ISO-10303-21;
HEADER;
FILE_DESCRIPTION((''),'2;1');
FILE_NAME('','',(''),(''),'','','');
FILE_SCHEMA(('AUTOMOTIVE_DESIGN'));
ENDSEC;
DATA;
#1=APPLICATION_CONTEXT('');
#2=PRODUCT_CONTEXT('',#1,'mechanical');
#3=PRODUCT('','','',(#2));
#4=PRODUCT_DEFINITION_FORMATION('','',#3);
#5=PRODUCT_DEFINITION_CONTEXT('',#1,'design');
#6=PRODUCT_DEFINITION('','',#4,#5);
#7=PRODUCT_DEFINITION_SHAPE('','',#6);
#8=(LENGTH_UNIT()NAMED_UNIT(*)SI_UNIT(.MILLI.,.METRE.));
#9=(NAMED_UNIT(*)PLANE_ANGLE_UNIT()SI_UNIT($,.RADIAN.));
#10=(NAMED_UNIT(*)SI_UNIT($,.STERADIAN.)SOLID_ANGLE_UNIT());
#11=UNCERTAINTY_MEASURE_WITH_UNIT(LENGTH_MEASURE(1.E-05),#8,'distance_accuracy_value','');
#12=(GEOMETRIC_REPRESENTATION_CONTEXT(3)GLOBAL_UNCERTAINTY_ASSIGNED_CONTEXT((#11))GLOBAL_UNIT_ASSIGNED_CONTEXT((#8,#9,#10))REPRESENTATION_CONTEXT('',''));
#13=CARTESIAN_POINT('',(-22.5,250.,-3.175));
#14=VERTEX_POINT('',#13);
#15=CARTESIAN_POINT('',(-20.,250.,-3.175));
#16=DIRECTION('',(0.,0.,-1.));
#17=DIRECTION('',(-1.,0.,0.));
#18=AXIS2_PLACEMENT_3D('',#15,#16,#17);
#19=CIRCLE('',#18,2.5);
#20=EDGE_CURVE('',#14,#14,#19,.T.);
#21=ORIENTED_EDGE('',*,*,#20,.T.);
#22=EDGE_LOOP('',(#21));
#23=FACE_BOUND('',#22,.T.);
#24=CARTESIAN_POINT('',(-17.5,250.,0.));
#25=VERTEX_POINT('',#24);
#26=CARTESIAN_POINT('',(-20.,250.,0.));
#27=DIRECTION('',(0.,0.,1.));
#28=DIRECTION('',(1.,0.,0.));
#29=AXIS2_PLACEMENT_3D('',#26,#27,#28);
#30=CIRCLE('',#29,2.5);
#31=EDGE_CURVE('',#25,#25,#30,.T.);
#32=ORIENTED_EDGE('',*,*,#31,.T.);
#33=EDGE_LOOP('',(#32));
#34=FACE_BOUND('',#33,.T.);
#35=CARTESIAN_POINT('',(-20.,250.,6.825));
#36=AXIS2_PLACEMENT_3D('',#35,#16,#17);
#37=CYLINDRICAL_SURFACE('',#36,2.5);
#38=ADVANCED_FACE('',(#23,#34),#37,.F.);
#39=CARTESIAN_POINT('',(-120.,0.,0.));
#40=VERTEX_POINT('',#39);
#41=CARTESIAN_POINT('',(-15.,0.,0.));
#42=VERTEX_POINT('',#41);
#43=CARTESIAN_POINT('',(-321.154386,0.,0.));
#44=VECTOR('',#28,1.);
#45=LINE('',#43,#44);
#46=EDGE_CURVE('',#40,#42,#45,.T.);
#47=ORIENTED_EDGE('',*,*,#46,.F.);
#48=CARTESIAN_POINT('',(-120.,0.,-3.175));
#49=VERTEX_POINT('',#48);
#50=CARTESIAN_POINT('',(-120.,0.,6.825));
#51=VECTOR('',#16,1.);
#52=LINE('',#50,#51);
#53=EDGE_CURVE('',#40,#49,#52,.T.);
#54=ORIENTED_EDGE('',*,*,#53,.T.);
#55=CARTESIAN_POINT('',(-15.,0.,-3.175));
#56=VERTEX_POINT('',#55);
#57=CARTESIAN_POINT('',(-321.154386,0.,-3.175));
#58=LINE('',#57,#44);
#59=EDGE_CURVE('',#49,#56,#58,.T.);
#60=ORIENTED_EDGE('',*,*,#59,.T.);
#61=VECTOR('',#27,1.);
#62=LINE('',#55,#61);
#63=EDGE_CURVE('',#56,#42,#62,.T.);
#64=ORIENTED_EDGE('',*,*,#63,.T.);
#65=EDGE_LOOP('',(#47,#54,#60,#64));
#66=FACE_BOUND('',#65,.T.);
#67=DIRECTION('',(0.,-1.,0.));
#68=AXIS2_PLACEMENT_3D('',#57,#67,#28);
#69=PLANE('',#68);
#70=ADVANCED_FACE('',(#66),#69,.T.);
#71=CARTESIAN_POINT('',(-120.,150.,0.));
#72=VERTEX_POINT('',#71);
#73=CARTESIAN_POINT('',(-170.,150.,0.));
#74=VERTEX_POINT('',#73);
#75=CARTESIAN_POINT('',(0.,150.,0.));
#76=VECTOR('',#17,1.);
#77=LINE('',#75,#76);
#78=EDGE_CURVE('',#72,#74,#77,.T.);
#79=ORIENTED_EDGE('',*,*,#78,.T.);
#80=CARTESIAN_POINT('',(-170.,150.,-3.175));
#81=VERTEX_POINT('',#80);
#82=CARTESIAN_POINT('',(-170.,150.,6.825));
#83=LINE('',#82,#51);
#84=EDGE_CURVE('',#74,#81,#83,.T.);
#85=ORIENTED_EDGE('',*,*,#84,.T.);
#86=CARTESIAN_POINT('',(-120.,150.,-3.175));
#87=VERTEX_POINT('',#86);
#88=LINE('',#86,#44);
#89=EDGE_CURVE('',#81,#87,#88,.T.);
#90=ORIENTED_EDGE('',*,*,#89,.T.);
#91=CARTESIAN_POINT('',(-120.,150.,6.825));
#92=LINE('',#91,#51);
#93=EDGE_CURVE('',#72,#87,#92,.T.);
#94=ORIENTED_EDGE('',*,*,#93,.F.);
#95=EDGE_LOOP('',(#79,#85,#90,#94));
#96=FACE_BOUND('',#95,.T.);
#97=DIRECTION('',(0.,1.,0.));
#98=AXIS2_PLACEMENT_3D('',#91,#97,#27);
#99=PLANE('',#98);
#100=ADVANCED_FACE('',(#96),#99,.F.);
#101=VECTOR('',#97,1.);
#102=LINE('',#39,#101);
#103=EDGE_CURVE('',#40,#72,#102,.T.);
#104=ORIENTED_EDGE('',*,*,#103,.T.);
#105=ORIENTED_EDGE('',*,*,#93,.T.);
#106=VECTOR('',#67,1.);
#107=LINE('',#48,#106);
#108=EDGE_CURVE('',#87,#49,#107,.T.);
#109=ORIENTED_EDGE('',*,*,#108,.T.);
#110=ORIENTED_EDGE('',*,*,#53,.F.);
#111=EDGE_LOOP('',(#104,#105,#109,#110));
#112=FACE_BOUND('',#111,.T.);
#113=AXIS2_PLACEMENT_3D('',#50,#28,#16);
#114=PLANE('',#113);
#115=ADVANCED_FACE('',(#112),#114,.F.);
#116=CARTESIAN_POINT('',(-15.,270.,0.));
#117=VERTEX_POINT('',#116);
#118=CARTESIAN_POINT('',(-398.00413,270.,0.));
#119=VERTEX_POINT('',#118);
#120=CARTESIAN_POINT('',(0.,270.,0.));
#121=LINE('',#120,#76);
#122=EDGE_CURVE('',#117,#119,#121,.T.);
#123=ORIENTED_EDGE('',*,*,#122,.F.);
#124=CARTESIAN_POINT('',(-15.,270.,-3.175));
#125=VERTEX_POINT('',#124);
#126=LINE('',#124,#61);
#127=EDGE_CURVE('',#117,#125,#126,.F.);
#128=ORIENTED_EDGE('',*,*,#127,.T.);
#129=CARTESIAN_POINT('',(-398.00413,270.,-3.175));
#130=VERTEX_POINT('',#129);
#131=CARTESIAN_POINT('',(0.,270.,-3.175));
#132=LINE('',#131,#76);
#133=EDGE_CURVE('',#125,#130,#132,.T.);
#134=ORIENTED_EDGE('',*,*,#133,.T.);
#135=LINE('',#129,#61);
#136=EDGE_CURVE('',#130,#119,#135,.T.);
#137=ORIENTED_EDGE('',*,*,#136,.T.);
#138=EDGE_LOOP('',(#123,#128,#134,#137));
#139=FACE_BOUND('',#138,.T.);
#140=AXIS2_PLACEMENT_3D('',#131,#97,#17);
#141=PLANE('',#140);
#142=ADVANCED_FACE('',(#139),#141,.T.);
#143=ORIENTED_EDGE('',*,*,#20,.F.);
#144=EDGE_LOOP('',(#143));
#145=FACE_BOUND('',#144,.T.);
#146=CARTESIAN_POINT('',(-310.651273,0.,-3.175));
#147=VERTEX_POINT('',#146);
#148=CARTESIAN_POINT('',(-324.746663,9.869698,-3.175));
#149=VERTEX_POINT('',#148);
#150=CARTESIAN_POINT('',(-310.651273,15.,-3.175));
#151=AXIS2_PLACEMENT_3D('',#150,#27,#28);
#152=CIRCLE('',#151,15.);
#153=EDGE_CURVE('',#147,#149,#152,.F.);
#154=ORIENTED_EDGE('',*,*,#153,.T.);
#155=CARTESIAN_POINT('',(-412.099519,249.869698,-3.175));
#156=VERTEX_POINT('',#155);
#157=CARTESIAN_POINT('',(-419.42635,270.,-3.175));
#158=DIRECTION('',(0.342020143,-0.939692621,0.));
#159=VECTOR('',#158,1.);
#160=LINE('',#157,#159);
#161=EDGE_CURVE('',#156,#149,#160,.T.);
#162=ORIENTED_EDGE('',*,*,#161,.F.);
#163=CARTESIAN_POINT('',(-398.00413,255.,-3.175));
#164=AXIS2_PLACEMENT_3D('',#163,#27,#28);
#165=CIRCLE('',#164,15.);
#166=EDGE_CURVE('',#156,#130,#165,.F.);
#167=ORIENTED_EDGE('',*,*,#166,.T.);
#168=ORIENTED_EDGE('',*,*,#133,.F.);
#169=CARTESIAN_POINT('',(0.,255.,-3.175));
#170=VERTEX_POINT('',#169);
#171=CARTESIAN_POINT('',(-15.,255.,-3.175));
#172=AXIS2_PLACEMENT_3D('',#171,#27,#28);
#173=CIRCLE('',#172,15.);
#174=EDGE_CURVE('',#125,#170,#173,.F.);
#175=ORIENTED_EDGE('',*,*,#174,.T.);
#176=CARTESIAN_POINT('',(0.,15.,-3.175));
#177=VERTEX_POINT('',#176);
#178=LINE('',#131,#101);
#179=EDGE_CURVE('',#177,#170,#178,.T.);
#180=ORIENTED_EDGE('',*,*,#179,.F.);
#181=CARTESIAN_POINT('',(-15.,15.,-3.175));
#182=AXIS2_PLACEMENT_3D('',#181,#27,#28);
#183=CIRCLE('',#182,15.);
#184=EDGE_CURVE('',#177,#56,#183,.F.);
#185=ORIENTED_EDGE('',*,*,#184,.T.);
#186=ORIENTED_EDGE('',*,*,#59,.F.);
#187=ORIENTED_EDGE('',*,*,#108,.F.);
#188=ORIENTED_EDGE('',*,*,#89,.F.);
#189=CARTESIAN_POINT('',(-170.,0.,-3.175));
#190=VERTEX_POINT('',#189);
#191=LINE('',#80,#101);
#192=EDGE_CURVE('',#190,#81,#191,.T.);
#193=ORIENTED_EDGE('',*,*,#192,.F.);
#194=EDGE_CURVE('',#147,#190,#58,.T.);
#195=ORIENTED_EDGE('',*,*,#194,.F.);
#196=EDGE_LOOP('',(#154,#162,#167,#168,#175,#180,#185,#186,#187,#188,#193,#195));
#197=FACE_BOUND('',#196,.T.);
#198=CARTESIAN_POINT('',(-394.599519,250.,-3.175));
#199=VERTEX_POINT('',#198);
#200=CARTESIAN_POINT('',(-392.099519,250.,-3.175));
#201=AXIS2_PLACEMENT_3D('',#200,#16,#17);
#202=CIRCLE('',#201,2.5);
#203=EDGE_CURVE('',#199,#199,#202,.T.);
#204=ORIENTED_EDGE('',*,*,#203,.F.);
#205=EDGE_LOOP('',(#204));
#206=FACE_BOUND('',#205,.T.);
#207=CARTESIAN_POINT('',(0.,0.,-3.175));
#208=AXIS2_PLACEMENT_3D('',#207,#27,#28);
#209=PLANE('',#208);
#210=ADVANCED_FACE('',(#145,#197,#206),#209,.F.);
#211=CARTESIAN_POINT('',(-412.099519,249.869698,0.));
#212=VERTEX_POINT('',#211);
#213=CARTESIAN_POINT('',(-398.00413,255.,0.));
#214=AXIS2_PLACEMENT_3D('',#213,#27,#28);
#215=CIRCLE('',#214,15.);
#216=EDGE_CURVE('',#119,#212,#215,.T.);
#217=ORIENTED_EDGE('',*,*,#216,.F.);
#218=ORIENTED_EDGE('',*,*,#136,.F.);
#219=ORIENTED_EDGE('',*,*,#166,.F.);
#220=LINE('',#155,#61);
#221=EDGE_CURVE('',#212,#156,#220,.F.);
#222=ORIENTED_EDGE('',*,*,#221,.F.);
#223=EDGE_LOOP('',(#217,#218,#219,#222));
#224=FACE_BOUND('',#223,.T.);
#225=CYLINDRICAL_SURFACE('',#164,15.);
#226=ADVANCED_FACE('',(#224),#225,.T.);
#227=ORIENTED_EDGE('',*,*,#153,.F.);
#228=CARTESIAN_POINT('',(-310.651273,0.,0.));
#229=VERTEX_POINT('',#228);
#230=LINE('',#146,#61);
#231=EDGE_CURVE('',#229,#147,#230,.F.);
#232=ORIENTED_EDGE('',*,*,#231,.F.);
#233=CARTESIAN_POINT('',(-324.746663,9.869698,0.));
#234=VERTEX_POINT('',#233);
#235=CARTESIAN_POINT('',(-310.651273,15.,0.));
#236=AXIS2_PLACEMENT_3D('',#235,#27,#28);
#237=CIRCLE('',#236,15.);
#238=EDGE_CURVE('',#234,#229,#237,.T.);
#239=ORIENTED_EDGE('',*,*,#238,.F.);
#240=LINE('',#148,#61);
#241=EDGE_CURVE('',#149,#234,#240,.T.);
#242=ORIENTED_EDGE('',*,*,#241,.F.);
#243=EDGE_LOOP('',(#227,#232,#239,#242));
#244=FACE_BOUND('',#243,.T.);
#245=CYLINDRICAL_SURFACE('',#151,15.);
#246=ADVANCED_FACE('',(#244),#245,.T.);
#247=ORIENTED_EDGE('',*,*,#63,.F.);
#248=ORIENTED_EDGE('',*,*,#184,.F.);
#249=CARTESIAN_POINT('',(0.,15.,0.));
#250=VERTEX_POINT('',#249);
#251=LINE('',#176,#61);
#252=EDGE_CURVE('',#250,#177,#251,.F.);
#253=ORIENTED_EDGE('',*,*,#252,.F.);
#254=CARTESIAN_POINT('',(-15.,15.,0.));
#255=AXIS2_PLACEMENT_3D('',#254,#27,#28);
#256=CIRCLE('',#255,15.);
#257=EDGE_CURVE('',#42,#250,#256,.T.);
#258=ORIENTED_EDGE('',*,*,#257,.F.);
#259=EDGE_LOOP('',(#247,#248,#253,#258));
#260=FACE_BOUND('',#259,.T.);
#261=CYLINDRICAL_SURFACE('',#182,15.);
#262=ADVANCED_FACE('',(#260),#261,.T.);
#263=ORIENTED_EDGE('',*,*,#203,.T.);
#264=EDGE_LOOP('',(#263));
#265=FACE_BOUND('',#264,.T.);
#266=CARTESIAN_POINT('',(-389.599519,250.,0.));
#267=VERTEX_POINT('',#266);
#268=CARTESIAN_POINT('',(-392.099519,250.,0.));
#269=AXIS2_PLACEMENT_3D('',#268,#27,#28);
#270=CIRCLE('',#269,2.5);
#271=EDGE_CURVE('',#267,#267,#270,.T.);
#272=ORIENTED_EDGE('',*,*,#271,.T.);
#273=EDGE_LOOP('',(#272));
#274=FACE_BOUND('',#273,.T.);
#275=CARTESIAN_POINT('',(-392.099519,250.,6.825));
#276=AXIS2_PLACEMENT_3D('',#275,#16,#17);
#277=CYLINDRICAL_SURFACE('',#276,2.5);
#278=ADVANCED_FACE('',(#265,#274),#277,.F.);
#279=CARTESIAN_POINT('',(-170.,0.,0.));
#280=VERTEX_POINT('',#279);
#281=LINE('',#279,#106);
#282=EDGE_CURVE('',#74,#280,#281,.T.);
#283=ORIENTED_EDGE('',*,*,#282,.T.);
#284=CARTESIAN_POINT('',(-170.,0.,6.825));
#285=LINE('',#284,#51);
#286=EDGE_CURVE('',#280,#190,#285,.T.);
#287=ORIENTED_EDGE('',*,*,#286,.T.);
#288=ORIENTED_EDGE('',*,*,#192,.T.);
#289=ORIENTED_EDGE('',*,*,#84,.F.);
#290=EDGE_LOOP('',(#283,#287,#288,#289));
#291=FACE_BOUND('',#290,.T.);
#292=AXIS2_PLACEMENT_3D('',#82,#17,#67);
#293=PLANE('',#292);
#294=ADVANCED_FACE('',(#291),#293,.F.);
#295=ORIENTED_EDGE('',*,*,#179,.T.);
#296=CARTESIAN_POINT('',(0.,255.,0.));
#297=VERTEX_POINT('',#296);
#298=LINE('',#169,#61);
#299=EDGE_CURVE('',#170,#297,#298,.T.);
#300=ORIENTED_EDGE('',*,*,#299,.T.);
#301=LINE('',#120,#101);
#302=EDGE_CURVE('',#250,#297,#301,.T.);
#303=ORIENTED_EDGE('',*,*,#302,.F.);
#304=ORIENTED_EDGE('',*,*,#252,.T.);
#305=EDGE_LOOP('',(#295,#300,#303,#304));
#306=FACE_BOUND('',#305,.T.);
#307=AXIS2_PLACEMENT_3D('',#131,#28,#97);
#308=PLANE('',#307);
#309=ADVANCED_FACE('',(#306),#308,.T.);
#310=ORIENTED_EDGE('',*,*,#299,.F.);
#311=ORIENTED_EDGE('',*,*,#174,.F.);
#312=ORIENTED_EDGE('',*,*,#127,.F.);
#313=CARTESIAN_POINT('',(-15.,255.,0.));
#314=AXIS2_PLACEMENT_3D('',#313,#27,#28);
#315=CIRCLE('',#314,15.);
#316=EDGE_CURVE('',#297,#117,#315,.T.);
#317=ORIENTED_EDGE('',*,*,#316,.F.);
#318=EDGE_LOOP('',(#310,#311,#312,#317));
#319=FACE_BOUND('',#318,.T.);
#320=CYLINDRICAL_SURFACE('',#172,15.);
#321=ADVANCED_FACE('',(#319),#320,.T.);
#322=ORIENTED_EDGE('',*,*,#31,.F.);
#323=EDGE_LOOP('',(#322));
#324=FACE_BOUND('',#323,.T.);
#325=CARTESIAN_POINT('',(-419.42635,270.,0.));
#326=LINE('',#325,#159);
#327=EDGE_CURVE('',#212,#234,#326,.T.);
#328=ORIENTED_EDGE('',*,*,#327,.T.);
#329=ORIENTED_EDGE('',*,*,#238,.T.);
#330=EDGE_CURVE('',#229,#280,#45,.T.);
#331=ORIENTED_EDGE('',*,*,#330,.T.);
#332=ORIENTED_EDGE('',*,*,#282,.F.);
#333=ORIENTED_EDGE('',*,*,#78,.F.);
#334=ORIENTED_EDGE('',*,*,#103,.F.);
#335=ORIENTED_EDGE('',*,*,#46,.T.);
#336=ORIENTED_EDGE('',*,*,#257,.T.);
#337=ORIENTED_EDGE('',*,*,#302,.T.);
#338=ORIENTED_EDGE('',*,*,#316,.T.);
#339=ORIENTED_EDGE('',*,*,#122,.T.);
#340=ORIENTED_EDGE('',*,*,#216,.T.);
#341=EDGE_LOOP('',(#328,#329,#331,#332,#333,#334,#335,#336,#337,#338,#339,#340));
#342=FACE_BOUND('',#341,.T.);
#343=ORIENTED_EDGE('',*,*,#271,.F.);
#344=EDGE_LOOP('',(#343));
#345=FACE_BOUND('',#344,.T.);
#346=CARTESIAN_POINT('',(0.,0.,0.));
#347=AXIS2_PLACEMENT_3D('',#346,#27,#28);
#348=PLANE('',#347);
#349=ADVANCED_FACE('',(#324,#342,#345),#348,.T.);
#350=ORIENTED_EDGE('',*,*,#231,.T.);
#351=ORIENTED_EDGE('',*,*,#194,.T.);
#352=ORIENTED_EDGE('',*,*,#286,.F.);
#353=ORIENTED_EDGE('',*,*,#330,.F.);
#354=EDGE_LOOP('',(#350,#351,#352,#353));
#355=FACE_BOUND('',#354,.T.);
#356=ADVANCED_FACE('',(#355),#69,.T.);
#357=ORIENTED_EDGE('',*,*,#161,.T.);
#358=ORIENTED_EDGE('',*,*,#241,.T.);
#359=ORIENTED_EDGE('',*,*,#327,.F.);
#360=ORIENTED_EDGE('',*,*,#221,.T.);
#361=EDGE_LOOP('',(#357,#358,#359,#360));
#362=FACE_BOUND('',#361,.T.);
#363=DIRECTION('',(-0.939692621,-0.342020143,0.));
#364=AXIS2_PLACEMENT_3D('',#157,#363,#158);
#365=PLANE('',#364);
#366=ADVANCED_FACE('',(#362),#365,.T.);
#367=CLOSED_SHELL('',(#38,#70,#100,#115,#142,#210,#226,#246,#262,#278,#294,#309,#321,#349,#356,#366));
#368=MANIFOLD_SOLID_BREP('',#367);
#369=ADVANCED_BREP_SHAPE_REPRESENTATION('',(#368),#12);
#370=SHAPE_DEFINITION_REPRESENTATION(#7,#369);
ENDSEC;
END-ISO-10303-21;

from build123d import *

# Parameters (mm, degrees)
BASE_FLANGE1_DEPTH = 3.175
FILLET1_R          = 15
SKETCH2_W          = 50
SKETCH2_H          = 150
CUT_EXTRUDE1_DEPTH = 10
SKETCH3_R          = 2.5
CUT_EXTRUDE2_DEPTH = 10


# Sheet-metal steps are written as plain solids
with BuildPart() as part:
    # Sketch1 → Base-Flange1 (new body)
    with BuildSketch(Plane.XY):
        Polygon((0, 270), (0, 0), (-321.154386438, 0), (-419.42634969, 270), align=None)
    extrude(amount=-BASE_FLANGE1_DEPTH)

    # Fillet1
    fillet1_edges = [part.edges().sort_by_distance(p)[0] for p in [
        (0, 270, -1.5875),
        (0, 0, -1.5875),
        (-321.154386438, 0, -1.5875),
        (-419.42634969, 270, -1.5875),
    ]]
    fillet(fillet1_edges, radius=FILLET1_R)

    # Sketch2 → Cut-Extrude1 (cut)
    with BuildSketch(Plane(origin=(0, 0, -3.175), x_dir=(-1, 0, 0), z_dir=(0, 0, -1))):
        with Locations((145, 75)):
            Rectangle(SKETCH2_W, SKETCH2_H)
    extrude(amount=-CUT_EXTRUDE1_DEPTH, mode=Mode.SUBTRACT)

    # Sketch3 → Cut-Extrude2 (cut)
    with BuildSketch(Plane(origin=(0, 0, -3.175), x_dir=(-1, 0, 0), z_dir=(0, 0, -1))):
        with Locations((20, 250)):
            Circle(SKETCH3_R)
        with Locations((392.099518901, 250)):
            Circle(SKETCH3_R)
    extrude(amount=-CUT_EXTRUDE2_DEPTH, mode=Mode.SUBTRACT)


solid = part.part
